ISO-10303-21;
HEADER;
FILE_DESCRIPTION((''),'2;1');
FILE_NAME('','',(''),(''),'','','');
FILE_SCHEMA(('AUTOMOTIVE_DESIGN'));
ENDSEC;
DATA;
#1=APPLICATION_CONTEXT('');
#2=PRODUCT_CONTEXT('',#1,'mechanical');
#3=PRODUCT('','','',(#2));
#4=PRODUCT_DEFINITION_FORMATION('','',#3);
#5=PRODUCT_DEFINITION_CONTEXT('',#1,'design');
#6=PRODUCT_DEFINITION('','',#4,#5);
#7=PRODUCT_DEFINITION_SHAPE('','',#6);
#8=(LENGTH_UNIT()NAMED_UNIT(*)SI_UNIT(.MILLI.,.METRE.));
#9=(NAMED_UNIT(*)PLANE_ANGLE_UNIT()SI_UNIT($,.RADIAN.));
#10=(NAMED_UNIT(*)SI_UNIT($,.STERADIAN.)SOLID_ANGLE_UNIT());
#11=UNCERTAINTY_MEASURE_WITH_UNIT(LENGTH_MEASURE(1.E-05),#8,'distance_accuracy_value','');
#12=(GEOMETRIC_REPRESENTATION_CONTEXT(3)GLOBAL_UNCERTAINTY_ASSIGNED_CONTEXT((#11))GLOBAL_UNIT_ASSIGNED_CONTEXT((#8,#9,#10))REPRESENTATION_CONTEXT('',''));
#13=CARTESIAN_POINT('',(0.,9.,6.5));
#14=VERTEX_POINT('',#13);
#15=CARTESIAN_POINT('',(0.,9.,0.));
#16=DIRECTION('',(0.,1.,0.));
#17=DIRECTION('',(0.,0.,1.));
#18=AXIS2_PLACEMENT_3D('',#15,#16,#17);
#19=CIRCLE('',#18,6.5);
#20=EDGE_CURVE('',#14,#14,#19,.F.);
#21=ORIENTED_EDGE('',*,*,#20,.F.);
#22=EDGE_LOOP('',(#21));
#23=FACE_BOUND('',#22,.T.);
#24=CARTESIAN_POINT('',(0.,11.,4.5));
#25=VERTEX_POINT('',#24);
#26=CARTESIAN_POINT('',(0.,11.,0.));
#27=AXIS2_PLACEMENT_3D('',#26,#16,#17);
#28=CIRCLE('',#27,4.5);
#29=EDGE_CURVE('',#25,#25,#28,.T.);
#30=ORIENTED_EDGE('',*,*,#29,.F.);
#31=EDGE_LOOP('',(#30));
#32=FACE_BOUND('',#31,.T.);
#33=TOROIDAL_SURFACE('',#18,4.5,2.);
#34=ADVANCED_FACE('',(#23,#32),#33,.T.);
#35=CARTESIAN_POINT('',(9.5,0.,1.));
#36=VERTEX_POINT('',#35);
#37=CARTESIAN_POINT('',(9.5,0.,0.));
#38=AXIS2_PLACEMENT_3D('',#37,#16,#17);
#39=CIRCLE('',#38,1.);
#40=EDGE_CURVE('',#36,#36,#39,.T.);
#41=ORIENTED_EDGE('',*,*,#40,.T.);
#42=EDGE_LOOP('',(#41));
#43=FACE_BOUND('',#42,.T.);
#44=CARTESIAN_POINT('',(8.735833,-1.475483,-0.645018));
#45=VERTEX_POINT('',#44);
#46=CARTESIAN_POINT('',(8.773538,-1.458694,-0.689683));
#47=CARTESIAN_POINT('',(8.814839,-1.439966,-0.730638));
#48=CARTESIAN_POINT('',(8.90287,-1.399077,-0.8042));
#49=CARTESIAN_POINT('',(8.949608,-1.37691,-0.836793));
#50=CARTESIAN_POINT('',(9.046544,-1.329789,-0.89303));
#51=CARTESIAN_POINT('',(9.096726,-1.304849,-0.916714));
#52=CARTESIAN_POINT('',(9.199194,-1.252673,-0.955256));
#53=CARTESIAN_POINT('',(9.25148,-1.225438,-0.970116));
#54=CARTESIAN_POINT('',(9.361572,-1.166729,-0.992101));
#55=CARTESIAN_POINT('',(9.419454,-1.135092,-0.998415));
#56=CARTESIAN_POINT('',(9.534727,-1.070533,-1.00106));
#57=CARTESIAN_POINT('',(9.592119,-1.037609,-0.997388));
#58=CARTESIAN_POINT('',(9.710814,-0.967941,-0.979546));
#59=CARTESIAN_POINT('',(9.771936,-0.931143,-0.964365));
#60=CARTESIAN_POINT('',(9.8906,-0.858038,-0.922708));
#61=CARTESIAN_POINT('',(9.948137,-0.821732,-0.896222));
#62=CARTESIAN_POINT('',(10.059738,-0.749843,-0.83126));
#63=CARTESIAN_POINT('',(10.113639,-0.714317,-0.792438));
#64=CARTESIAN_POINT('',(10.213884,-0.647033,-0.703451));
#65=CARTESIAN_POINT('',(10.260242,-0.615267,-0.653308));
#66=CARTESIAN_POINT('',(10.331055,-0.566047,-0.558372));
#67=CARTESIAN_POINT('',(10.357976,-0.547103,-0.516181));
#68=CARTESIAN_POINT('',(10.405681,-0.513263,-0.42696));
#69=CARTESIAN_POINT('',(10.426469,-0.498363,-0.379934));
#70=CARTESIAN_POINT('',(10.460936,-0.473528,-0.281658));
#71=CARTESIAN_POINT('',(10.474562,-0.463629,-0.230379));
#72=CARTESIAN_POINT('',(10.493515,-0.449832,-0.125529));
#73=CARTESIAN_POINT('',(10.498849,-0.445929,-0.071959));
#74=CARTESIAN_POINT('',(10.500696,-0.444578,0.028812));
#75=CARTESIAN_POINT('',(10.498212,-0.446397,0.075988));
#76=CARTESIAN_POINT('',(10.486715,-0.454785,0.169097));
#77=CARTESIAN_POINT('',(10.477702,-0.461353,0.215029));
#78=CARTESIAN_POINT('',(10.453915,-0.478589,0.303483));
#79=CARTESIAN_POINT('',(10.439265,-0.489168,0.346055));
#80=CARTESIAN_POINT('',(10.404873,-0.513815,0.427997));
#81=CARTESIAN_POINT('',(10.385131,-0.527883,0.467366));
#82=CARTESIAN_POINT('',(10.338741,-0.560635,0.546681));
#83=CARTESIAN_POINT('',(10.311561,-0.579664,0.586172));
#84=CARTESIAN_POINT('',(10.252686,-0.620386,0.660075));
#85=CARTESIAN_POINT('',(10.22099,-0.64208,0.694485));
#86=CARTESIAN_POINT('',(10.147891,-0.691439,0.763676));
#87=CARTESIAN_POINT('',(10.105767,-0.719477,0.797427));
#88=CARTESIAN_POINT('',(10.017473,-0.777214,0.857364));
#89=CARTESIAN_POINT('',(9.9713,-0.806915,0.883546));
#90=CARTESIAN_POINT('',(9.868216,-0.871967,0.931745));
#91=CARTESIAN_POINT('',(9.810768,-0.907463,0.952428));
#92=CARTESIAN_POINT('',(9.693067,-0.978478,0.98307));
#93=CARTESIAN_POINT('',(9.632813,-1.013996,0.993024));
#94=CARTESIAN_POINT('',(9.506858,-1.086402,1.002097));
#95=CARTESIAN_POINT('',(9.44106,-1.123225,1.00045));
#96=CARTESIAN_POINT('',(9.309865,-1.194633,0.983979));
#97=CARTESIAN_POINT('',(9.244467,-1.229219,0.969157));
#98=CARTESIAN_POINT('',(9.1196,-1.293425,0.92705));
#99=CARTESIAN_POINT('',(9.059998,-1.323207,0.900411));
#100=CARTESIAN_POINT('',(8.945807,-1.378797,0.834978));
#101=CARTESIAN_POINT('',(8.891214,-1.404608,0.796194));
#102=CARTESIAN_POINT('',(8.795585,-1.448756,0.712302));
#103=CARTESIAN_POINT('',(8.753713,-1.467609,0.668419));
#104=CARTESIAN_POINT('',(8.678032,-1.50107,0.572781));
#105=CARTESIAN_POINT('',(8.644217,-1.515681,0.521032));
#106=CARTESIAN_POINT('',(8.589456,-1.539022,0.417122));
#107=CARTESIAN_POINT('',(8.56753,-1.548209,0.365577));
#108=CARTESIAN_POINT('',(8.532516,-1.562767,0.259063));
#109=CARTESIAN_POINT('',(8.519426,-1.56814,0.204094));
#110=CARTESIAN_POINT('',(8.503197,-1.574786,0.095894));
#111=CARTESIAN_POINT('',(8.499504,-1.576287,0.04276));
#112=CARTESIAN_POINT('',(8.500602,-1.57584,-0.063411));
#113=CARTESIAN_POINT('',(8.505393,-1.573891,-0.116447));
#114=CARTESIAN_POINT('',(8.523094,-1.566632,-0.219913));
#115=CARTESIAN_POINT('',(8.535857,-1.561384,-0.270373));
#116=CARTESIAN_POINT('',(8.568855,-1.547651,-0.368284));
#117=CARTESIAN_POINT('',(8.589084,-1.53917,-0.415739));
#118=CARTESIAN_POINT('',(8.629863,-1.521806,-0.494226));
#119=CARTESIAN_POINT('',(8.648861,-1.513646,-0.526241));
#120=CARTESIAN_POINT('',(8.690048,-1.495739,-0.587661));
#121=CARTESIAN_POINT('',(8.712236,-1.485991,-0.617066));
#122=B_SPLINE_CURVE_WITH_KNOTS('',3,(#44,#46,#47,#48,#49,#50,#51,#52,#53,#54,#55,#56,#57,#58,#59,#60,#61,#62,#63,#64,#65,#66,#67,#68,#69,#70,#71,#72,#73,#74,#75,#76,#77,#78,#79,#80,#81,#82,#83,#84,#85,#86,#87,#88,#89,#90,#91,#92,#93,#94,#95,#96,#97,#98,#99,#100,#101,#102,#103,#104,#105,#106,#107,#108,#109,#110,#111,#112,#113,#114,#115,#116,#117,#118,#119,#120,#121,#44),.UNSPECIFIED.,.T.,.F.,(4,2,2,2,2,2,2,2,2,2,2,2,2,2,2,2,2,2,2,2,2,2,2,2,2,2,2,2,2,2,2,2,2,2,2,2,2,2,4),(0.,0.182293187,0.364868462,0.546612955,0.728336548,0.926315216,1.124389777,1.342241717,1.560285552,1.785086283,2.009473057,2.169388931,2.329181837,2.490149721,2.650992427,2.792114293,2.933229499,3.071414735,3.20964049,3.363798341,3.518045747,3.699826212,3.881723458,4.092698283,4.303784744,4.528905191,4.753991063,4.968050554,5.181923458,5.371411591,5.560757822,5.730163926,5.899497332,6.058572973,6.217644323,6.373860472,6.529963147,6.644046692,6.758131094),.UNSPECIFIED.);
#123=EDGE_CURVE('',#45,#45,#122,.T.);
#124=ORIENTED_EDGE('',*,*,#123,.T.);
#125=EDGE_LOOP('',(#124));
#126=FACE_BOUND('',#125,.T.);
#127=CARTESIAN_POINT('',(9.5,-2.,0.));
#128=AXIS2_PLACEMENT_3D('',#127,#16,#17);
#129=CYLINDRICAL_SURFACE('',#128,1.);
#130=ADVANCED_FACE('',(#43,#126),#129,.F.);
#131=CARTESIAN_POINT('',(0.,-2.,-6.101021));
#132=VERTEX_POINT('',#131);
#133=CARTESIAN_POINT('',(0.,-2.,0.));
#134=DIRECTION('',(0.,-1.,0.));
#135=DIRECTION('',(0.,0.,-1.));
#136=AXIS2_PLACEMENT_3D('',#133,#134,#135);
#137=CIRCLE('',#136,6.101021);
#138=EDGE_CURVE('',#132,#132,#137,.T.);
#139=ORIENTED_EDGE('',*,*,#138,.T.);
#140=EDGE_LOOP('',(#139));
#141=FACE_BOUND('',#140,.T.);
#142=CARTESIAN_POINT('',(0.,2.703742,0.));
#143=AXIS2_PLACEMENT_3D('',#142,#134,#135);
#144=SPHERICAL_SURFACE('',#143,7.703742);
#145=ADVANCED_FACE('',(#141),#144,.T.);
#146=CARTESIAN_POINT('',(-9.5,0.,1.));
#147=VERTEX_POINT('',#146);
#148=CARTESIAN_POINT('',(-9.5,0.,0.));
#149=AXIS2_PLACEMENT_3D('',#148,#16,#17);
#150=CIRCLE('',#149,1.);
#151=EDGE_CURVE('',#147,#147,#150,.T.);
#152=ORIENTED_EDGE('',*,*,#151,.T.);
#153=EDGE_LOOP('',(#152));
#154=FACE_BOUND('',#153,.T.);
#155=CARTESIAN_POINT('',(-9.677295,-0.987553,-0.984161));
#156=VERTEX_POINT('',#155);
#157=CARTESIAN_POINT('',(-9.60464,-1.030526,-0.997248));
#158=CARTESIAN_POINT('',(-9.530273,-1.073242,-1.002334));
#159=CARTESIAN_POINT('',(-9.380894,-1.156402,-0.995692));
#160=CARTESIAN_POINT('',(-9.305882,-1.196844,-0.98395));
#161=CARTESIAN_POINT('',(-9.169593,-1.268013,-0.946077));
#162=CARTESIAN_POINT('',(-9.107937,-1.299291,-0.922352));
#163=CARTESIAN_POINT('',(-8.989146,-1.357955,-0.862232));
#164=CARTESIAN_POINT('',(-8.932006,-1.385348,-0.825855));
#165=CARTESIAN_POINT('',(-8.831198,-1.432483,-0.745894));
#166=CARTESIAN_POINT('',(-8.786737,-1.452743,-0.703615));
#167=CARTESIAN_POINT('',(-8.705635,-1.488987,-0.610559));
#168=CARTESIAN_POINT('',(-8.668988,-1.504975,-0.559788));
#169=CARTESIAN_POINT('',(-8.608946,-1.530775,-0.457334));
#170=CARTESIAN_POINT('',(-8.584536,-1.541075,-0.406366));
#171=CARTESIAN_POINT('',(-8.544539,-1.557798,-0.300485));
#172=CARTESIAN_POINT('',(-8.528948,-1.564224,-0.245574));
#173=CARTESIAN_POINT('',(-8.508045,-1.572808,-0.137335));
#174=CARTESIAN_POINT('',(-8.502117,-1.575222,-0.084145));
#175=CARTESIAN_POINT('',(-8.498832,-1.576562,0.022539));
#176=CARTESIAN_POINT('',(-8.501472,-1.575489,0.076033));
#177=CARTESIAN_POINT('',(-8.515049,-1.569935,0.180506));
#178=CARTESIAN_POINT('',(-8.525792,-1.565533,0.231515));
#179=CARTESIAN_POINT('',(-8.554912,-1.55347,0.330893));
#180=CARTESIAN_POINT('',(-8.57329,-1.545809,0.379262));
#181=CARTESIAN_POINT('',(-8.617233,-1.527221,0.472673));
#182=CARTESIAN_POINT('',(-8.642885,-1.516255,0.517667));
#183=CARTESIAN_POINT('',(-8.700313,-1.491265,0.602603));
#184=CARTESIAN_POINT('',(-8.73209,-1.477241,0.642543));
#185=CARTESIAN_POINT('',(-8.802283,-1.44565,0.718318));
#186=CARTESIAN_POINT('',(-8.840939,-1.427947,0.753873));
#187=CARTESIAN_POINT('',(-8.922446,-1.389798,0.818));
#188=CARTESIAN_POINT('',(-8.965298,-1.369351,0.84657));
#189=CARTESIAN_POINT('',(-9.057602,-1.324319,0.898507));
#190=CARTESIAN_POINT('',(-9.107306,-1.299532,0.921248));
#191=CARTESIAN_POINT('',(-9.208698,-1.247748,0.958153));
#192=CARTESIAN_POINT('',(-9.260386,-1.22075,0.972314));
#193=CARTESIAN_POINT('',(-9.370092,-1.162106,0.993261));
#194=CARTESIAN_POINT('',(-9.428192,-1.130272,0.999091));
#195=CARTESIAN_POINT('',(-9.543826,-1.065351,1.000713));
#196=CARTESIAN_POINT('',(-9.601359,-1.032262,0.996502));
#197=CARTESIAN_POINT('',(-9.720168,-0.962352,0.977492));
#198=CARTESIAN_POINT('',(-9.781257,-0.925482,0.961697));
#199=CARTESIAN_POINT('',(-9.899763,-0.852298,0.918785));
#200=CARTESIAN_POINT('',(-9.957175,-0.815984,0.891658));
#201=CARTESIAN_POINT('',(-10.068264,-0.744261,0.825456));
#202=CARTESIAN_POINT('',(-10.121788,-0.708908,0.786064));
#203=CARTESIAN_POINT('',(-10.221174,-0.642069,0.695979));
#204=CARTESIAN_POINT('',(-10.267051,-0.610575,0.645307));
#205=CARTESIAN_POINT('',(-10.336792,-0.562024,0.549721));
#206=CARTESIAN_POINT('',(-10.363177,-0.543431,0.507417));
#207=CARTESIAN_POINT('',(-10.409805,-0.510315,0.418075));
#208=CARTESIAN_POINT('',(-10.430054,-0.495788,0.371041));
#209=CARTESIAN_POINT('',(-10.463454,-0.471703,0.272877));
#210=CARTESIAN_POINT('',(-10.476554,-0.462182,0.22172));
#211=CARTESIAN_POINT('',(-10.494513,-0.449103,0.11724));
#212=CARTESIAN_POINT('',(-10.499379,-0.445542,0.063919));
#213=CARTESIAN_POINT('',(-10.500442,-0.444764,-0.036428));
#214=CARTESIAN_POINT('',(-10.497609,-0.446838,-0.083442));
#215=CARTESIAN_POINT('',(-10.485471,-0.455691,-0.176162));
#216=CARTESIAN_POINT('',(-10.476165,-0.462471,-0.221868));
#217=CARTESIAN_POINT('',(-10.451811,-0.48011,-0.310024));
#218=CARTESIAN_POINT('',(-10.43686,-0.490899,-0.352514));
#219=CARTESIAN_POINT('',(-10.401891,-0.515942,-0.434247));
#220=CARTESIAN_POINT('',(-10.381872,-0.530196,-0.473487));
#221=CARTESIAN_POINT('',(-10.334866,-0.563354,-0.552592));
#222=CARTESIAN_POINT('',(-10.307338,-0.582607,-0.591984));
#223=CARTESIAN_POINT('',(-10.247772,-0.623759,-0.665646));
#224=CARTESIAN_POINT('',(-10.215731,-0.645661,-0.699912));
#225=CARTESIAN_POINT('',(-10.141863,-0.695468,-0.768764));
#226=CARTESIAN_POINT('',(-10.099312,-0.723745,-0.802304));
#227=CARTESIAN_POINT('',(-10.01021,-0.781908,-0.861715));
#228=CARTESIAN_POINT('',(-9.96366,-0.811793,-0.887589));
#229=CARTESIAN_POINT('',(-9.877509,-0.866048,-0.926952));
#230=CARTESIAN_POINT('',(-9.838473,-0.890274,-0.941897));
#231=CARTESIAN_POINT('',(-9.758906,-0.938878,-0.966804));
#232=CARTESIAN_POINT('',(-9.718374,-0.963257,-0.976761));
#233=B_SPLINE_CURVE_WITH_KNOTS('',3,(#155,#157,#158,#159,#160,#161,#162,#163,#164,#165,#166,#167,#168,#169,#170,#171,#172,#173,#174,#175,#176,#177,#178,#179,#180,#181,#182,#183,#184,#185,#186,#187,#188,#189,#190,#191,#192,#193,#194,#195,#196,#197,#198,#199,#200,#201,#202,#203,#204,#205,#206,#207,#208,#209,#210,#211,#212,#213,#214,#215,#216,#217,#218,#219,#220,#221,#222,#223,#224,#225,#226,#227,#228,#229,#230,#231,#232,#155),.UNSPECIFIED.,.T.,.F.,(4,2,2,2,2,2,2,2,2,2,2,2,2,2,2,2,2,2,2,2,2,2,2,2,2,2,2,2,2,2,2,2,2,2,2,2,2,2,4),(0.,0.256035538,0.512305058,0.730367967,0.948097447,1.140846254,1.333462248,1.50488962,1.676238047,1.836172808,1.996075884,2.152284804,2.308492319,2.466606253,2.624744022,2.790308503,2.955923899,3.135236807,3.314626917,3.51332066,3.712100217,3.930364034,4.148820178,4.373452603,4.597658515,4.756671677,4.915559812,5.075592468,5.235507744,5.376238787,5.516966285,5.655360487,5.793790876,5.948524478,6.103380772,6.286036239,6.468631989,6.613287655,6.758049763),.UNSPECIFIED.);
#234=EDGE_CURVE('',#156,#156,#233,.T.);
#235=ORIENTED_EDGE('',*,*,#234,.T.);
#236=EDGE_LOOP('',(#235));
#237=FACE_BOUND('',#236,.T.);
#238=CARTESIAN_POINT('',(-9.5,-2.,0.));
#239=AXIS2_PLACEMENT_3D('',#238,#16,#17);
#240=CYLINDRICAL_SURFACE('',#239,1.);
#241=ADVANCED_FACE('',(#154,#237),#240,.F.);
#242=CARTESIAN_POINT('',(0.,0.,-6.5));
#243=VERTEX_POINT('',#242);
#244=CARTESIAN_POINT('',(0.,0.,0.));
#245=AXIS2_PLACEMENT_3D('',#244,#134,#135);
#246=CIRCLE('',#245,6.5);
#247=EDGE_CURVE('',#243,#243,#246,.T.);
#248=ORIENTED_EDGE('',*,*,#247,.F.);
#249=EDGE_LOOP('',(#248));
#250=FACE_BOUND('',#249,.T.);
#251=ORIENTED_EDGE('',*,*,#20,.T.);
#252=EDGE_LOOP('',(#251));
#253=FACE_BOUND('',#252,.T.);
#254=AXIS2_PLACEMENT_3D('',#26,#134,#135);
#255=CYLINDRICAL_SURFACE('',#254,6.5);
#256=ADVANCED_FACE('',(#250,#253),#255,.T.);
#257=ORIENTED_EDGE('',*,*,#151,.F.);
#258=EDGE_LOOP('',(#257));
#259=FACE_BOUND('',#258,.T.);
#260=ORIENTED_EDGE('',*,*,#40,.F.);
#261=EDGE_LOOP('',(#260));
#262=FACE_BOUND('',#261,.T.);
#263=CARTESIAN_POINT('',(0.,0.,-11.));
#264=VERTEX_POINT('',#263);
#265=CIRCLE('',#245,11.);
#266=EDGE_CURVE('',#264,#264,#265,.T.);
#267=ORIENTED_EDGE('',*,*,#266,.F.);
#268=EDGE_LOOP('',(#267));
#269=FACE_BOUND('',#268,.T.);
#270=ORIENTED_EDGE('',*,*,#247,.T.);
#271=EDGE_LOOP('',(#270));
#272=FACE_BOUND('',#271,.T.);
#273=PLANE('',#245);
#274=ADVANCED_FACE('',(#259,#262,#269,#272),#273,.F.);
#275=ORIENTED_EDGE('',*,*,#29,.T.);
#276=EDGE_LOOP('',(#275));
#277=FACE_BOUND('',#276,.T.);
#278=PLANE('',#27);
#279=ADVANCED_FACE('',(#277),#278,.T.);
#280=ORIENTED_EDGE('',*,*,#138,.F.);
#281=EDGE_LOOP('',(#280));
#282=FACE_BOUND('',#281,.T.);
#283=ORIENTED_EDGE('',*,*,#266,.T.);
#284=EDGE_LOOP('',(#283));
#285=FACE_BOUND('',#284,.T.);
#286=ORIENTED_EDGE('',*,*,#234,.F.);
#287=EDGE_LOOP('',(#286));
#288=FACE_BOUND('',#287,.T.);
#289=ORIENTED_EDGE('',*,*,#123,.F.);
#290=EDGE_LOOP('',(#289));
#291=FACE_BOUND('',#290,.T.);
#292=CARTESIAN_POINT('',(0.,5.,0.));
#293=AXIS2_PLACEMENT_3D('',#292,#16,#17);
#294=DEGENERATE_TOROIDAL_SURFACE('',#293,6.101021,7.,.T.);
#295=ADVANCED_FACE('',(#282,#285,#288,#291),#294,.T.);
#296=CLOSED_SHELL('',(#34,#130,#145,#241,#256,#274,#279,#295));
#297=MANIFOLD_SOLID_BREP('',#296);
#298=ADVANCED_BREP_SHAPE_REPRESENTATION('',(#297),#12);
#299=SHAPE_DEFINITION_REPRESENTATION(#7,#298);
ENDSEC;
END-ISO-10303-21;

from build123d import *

# Parameters (mm, degrees)
SKETCH1_R           = 6.5
BOSS_EXTRUDE1_DEPTH = 11
SKETCH2_R           = 11
BOSS_EXTRUDE2_DEPTH = 2
FILLET1_R           = 7
DOME1_FACE_RADIUS   = 6.101020514
DOME1_HEIGHT        = 3
SKETCH3_R           = 1
CUT_EXTRUDE1_DEPTH  = 2
FILLET2_R           = 2


with BuildPart() as part:
    # Sketch1 → Boss-Extrude1 (new body)
    with BuildSketch(Plane(origin=(0, 0, 0), x_dir=(1, 0, 0), z_dir=(0, 1, 0))):
        with Locations(Location((0, 0, 0), (0, 0, 270))):
            Circle(SKETCH1_R)
    extrude(amount=BOSS_EXTRUDE1_DEPTH)

    # Sketch2 → Boss-Extrude2 (add)
    with BuildSketch(Plane.XZ):
        with Locations(Location((0, 0, 0), (0, 0, 270))):
            Circle(SKETCH2_R)
    extrude(amount=BOSS_EXTRUDE2_DEPTH)

    # Fillet1
    # the kernel refuses this fillet: 7 mm, written as the material it takes off along each edge
    with BuildSketch(Plane(origin=(0, -2, 0), x_dir=(0, 0, -1), z_dir=(-1, 0, 0))) as fillet1_piece_1:
        with BuildLine():
            CenterArc((6.101020514, -7), FILLET1_R, 45.584691403, 44.415308597)
            Line((6.101020514, 0), (6.101020514, 0.14))
            Line((6.101020514, 0.14), (11, 0.14))
            Line((11, 0.14), (11.14, 0))
            ThreePointArc((11.14, 0), (11.14, -1), (11.09797959, -1.9))
            Line((11.09797959, -1.9), (11, -2))
        make_face()
    revolve(axis=Axis((0, -2, 0), (0, -1, 0)), mode=Mode.SUBTRACT)

    # Dome1: a dome of height H over a round flat face of radius A is a cap of a sphere of radius (A * A + H * H) / (2 * H)
    dome1_r = (DOME1_FACE_RADIUS * DOME1_FACE_RADIUS + DOME1_HEIGHT * DOME1_HEIGHT) / (2 * DOME1_HEIGHT)
    dome1_base = Plane((0, -2, 0), z_dir=(0, -1, 0))
    with Locations(dome1_base.offset(DOME1_HEIGHT - dome1_r)):
        dome1_ball = Sphere(dome1_r, mode=Mode.PRIVATE)
    add(split(dome1_ball, bisect_by=dome1_base, keep=Keep.TOP, mode=Mode.PRIVATE))

    # Sketch3 → Cut-Extrude1 (cut)
    with BuildSketch(Plane(origin=(0, 0, 0), x_dir=(1, 0, 0), z_dir=(0, 1, 0))):
        with Locations(Location((-9.5, 0, 0), (0, 0, 270))):
            Circle(SKETCH3_R)
        with Locations(Location((9.5, 0, 0), (0, 0, 270))):
            Circle(SKETCH3_R)
    extrude(amount=-CUT_EXTRUDE1_DEPTH, mode=Mode.SUBTRACT)

    # Fillet2
    fillet2_edges = [part.edges().sort_by_distance(p)[0] for p in [
        (0, 11, -6.5),
    ]]
    fillet(fillet2_edges, radius=FILLET2_R)


solid = part.part
